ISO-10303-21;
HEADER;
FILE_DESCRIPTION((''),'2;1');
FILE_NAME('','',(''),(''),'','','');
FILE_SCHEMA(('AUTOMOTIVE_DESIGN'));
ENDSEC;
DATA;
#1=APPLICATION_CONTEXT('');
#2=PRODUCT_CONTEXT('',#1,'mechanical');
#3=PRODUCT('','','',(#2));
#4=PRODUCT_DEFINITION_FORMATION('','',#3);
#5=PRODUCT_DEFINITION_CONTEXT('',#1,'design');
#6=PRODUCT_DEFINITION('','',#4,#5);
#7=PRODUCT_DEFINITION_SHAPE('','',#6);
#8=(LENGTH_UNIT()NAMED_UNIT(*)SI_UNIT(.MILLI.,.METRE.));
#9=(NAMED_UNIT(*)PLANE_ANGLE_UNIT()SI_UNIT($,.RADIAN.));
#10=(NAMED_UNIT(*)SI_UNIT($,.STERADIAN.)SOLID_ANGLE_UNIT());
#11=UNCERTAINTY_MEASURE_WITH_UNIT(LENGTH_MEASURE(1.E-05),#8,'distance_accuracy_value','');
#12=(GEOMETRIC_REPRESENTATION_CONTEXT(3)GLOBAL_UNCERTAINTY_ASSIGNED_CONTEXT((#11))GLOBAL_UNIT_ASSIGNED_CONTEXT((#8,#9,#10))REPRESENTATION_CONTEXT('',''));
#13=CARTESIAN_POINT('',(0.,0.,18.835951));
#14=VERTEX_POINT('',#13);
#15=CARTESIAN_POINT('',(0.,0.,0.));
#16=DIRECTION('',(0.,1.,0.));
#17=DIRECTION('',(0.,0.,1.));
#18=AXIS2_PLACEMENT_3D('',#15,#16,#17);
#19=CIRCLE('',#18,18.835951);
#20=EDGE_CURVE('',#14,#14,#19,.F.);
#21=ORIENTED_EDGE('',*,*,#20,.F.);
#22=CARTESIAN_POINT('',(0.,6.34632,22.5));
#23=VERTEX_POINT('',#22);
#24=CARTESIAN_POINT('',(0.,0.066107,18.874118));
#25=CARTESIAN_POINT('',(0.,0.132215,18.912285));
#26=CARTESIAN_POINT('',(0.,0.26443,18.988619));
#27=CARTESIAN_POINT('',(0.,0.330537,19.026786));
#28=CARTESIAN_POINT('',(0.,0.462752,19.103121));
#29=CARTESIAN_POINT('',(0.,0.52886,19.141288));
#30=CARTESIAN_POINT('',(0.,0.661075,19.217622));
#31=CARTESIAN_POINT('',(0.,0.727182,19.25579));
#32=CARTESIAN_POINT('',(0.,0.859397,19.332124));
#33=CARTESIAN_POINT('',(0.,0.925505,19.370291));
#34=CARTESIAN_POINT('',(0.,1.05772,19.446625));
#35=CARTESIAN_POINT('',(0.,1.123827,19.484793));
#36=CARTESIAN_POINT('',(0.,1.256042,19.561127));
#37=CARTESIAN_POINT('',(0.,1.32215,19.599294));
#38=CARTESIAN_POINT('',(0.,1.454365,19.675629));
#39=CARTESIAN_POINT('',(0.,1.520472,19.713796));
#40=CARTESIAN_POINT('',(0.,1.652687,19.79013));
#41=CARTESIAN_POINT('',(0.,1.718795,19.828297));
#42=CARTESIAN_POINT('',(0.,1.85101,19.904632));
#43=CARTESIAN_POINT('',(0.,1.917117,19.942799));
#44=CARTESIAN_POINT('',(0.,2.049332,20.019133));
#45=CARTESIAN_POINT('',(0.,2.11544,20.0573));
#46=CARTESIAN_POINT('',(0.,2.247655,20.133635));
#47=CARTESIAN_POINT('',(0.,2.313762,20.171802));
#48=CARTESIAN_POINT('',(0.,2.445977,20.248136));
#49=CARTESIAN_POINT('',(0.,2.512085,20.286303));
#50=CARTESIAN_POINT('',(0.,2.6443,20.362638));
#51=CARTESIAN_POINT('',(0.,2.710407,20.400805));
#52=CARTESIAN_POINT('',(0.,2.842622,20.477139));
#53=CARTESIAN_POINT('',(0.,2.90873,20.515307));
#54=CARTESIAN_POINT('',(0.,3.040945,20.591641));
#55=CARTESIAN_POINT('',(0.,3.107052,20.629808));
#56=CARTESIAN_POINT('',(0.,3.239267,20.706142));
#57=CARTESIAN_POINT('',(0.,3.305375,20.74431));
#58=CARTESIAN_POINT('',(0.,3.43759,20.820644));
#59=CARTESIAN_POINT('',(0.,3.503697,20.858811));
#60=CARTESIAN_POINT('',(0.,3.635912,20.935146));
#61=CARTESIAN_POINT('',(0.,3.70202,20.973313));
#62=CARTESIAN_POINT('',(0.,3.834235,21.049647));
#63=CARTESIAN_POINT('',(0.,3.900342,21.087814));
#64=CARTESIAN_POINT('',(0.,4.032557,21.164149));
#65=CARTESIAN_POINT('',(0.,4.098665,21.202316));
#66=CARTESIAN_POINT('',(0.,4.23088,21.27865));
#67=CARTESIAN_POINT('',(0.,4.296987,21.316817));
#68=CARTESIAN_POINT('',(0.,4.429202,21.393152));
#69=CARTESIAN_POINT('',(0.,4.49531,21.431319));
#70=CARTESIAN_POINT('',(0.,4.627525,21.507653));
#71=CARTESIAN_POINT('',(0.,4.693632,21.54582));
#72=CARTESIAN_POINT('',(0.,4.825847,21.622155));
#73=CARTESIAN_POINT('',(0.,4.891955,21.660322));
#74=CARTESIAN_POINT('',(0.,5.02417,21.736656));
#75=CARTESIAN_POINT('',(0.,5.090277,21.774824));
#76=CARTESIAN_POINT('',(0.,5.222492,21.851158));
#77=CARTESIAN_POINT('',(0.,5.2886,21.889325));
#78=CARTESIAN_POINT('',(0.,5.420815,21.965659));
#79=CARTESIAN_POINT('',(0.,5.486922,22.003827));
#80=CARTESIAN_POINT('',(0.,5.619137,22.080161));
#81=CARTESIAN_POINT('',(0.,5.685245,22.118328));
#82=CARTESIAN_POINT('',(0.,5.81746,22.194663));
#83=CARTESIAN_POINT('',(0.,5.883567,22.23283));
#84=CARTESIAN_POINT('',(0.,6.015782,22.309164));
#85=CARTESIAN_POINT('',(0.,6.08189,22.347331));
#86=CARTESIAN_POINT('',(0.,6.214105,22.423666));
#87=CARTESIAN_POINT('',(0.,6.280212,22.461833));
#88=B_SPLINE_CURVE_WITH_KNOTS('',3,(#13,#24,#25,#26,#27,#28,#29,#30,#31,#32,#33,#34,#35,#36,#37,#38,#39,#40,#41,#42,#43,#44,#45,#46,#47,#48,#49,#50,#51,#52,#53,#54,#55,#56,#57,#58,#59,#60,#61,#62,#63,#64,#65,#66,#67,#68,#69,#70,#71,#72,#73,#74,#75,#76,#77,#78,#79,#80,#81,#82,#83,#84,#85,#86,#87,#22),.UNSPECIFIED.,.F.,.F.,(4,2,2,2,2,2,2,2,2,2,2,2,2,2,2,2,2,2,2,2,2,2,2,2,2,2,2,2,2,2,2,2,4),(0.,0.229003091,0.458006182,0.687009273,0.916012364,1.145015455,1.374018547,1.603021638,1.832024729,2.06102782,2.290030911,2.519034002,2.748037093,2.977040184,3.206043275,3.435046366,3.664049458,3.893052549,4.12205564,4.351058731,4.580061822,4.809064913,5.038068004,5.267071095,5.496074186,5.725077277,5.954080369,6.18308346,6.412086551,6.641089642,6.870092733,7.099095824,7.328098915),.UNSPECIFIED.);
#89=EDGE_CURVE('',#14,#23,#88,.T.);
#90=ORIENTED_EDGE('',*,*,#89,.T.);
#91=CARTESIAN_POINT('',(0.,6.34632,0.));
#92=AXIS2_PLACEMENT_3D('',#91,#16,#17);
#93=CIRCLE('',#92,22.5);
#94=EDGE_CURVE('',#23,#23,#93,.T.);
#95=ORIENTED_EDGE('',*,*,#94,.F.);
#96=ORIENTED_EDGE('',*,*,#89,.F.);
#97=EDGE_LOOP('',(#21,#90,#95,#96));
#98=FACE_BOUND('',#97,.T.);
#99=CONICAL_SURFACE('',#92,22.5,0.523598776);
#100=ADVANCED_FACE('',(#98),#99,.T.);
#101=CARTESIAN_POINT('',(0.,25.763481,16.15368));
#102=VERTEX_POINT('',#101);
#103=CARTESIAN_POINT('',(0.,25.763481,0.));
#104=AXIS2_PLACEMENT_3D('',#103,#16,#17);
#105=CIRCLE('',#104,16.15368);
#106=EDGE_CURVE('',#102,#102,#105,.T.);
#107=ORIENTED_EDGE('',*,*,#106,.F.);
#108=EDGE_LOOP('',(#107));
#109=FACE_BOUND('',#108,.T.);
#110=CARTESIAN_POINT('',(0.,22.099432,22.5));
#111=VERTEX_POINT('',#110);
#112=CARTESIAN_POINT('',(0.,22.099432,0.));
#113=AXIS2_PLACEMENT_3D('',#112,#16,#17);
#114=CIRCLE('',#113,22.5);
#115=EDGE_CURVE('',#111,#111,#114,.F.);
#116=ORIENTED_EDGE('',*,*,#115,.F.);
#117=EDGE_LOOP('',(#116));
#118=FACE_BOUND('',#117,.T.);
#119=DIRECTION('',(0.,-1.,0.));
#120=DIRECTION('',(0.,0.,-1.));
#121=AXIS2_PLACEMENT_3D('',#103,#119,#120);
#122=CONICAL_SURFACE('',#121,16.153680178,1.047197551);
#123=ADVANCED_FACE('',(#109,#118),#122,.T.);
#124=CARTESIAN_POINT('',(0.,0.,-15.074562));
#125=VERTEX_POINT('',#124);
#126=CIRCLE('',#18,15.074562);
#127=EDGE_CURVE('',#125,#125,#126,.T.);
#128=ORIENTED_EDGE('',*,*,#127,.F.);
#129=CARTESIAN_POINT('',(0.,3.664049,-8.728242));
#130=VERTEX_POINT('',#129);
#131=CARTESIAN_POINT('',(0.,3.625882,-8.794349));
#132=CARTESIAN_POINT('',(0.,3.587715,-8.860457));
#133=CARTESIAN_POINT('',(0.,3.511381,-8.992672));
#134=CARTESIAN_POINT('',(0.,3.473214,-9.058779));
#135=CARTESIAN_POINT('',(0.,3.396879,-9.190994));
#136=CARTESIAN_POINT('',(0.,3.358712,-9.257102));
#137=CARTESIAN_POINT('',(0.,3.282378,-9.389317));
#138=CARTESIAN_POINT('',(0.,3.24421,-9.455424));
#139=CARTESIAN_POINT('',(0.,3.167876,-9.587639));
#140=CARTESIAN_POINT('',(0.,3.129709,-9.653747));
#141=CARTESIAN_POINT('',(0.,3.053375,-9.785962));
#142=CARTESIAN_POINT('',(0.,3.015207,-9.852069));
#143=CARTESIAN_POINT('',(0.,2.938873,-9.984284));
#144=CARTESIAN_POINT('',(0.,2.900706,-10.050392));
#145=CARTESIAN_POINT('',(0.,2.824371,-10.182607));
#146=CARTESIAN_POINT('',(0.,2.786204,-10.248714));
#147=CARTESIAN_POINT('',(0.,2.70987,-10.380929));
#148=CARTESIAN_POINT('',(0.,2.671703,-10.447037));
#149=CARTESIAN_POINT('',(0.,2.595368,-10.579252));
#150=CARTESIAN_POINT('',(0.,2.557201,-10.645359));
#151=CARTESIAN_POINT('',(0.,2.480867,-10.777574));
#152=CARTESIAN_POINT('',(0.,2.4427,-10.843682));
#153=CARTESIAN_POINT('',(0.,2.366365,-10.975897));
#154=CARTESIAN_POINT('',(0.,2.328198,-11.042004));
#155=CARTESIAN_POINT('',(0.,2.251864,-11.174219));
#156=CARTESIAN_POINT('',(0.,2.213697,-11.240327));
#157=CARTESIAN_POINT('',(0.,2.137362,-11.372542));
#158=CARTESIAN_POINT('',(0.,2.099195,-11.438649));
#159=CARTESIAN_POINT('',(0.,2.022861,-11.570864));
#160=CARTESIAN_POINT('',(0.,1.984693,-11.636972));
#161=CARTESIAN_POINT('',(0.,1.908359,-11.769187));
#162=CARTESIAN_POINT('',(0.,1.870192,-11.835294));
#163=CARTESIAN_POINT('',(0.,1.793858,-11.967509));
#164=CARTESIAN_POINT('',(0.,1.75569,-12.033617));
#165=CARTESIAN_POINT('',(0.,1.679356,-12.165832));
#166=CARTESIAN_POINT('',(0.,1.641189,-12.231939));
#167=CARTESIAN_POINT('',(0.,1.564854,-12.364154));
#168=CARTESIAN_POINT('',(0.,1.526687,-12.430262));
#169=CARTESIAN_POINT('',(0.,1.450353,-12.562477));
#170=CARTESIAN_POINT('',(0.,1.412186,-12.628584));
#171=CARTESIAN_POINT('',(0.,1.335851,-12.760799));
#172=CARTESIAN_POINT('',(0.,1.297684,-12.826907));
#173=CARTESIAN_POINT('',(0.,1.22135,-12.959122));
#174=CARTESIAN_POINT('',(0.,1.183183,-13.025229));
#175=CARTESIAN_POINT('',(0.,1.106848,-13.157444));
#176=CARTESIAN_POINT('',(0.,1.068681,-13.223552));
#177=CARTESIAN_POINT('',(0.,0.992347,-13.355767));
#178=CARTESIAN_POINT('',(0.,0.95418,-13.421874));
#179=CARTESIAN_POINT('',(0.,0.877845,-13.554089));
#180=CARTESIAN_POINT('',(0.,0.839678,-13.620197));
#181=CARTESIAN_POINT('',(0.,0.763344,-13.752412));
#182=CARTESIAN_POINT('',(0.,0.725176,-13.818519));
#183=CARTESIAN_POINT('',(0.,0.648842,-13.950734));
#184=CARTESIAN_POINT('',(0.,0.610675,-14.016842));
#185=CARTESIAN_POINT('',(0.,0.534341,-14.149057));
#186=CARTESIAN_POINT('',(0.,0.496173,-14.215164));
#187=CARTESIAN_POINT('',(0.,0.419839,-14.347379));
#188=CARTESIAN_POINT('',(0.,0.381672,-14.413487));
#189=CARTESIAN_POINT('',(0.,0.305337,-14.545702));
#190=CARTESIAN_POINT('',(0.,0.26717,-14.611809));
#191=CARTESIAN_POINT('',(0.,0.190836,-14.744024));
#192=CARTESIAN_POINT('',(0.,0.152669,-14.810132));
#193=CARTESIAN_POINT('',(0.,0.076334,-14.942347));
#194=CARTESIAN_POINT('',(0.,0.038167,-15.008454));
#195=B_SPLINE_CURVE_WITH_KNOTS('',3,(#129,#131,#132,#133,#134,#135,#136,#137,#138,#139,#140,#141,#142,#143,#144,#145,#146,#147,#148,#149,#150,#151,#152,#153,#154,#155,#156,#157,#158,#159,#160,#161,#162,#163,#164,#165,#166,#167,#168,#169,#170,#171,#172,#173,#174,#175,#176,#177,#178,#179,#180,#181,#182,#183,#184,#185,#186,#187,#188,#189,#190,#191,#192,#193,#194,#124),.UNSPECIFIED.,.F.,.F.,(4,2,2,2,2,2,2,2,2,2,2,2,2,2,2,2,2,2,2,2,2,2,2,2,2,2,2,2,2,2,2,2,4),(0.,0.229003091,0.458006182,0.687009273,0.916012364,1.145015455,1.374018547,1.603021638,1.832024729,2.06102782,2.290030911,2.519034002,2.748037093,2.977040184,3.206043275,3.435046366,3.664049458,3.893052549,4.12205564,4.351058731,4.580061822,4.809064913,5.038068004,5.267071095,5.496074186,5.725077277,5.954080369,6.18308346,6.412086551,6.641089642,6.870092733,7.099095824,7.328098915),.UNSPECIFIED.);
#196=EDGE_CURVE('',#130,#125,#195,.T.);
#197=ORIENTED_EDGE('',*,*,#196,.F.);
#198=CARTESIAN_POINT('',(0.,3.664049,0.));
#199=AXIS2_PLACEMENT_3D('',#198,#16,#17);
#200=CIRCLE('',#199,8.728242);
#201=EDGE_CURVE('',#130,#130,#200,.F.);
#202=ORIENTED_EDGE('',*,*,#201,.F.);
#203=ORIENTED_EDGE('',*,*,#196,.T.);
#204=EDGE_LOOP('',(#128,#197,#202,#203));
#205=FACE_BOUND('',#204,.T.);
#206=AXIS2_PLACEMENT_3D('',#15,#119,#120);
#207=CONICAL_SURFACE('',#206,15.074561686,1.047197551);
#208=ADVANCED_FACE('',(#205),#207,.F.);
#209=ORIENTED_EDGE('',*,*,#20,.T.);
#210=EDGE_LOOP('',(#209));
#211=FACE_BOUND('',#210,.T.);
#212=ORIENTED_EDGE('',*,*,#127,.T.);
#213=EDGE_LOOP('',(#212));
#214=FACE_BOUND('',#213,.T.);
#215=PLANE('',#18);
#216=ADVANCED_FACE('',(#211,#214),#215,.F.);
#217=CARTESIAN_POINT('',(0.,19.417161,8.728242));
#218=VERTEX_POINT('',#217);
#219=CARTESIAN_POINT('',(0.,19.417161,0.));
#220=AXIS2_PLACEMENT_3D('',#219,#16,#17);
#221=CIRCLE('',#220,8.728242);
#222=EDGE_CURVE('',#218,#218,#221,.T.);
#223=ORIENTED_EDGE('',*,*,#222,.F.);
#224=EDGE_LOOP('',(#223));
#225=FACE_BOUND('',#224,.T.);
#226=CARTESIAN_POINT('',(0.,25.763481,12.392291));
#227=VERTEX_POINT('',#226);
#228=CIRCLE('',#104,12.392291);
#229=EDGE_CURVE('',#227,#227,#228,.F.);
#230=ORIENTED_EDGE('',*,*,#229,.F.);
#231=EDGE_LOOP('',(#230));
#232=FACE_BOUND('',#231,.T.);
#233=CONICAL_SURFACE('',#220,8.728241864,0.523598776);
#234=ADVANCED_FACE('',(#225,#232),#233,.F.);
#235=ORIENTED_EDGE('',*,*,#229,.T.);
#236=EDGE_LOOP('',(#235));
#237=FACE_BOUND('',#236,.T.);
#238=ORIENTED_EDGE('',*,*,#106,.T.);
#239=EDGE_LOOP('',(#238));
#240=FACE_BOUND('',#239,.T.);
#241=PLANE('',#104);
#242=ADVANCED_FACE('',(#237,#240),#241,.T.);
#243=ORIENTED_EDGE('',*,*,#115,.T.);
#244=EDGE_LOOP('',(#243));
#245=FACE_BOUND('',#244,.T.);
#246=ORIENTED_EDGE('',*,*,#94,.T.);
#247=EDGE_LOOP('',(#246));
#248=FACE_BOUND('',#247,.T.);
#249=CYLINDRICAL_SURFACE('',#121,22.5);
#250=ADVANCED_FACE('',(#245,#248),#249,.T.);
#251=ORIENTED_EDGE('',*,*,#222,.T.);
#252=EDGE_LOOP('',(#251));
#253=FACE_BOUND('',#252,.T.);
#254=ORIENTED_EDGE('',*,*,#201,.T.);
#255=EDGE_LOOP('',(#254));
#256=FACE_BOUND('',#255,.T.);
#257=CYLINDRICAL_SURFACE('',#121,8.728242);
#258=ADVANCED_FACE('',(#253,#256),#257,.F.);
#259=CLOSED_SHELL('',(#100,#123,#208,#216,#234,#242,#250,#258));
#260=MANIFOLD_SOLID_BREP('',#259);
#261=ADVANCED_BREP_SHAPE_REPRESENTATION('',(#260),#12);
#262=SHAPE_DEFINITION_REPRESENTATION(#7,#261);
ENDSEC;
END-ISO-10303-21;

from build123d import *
from OCP.BRepFilletAPI import BRepFilletAPI_MakeChamfer

# Parameters (mm, degrees)
SKETCH1_R           = 22.5
BOSS_EXTRUDE1_DEPTH = 25.76348119
SKETCH2_R           = 8.728241864
CUT_EXTRUDE1_DEPTH  = 41.942117227
CHAMFER1_SIZE       = 3.664049458
CHAMFER1_SIZE2      = 6.346319822


with BuildPart() as part:
    # Sketch1 → Boss-Extrude1 (new body)
    with BuildSketch(Plane(origin=(0, 0, 0), x_dir=(1, 0, 0), z_dir=(0, 1, 0))):
        Circle(SKETCH1_R)
    extrude(amount=BOSS_EXTRUDE1_DEPTH)

    # Sketch2 → Cut-Extrude1 (cut, through all)
    with BuildSketch(Plane(origin=(0, 0, 0), x_dir=(1, 0, 0), z_dir=(0, 1, 0))):
        Circle(SKETCH2_R)
    extrude(amount=CUT_EXTRUDE1_DEPTH, mode=Mode.SUBTRACT)

    # Chamfer1: one chamfer whose edges measure the first distance from different faces: ONE call of the kernel's chamfer builder (chamfer() names one face for all edges)
    chamfer1_edges_1 = [part.edges().sort_by_distance(p)[0] for p in [
        (-8.728241864, 25.76348119, 0),
    ]]
    chamfer1_side_1 = [part.faces().sort_by_distance(p)[0] for p in [
        (-21.863603897, 25.76348119, 0),
    ]]
    chamfer1_edges_2 = [part.edges().sort_by_distance(p)[0] for p in [
        (-8.728241864, 0, 0),
    ]]
    chamfer1_side_2 = [part.faces().sort_by_distance(p)[0] for p in [
        (-8.728241864, 12.881740595, 0),
    ]]
    chamfer1_edges_3 = [part.edges().sort_by_distance(p)[0] for p in [
        (-22.5, 0, 0),
    ]]
    chamfer1_side_3 = [part.faces().sort_by_distance(p)[0] for p in [
        (-21.863603897, 0, 0),
    ]]
    chamfer1_edges_4 = [part.edges().sort_by_distance(p)[0] for p in [
        (-22.5, 25.76348119, 0),
    ]]
    chamfer1_side_4 = [part.faces().sort_by_distance(p)[0] for p in [
        (-22.5, 12.881740595, 0),
    ]]
    chamfer1 = BRepFilletAPI_MakeChamfer(part.part.solid().wrapped)
    for e in chamfer1_edges_1:
        chamfer1.Add(CHAMFER1_SIZE, CHAMFER1_SIZE2, e.wrapped, chamfer1_side_1[0].wrapped)  # the first distance lies on this face
    for e in chamfer1_edges_2:
        chamfer1.Add(CHAMFER1_SIZE, CHAMFER1_SIZE2, e.wrapped, chamfer1_side_2[0].wrapped)  # the first distance lies on this face
    for e in chamfer1_edges_3:
        chamfer1.Add(CHAMFER1_SIZE, CHAMFER1_SIZE2, e.wrapped, chamfer1_side_3[0].wrapped)  # the first distance lies on this face
    for e in chamfer1_edges_4:
        chamfer1.Add(CHAMFER1_SIZE, CHAMFER1_SIZE2, e.wrapped, chamfer1_side_4[0].wrapped)  # the first distance lies on this face
    add(Compound.cast(chamfer1.Shape()), mode=Mode.REPLACE)


solid = part.part
